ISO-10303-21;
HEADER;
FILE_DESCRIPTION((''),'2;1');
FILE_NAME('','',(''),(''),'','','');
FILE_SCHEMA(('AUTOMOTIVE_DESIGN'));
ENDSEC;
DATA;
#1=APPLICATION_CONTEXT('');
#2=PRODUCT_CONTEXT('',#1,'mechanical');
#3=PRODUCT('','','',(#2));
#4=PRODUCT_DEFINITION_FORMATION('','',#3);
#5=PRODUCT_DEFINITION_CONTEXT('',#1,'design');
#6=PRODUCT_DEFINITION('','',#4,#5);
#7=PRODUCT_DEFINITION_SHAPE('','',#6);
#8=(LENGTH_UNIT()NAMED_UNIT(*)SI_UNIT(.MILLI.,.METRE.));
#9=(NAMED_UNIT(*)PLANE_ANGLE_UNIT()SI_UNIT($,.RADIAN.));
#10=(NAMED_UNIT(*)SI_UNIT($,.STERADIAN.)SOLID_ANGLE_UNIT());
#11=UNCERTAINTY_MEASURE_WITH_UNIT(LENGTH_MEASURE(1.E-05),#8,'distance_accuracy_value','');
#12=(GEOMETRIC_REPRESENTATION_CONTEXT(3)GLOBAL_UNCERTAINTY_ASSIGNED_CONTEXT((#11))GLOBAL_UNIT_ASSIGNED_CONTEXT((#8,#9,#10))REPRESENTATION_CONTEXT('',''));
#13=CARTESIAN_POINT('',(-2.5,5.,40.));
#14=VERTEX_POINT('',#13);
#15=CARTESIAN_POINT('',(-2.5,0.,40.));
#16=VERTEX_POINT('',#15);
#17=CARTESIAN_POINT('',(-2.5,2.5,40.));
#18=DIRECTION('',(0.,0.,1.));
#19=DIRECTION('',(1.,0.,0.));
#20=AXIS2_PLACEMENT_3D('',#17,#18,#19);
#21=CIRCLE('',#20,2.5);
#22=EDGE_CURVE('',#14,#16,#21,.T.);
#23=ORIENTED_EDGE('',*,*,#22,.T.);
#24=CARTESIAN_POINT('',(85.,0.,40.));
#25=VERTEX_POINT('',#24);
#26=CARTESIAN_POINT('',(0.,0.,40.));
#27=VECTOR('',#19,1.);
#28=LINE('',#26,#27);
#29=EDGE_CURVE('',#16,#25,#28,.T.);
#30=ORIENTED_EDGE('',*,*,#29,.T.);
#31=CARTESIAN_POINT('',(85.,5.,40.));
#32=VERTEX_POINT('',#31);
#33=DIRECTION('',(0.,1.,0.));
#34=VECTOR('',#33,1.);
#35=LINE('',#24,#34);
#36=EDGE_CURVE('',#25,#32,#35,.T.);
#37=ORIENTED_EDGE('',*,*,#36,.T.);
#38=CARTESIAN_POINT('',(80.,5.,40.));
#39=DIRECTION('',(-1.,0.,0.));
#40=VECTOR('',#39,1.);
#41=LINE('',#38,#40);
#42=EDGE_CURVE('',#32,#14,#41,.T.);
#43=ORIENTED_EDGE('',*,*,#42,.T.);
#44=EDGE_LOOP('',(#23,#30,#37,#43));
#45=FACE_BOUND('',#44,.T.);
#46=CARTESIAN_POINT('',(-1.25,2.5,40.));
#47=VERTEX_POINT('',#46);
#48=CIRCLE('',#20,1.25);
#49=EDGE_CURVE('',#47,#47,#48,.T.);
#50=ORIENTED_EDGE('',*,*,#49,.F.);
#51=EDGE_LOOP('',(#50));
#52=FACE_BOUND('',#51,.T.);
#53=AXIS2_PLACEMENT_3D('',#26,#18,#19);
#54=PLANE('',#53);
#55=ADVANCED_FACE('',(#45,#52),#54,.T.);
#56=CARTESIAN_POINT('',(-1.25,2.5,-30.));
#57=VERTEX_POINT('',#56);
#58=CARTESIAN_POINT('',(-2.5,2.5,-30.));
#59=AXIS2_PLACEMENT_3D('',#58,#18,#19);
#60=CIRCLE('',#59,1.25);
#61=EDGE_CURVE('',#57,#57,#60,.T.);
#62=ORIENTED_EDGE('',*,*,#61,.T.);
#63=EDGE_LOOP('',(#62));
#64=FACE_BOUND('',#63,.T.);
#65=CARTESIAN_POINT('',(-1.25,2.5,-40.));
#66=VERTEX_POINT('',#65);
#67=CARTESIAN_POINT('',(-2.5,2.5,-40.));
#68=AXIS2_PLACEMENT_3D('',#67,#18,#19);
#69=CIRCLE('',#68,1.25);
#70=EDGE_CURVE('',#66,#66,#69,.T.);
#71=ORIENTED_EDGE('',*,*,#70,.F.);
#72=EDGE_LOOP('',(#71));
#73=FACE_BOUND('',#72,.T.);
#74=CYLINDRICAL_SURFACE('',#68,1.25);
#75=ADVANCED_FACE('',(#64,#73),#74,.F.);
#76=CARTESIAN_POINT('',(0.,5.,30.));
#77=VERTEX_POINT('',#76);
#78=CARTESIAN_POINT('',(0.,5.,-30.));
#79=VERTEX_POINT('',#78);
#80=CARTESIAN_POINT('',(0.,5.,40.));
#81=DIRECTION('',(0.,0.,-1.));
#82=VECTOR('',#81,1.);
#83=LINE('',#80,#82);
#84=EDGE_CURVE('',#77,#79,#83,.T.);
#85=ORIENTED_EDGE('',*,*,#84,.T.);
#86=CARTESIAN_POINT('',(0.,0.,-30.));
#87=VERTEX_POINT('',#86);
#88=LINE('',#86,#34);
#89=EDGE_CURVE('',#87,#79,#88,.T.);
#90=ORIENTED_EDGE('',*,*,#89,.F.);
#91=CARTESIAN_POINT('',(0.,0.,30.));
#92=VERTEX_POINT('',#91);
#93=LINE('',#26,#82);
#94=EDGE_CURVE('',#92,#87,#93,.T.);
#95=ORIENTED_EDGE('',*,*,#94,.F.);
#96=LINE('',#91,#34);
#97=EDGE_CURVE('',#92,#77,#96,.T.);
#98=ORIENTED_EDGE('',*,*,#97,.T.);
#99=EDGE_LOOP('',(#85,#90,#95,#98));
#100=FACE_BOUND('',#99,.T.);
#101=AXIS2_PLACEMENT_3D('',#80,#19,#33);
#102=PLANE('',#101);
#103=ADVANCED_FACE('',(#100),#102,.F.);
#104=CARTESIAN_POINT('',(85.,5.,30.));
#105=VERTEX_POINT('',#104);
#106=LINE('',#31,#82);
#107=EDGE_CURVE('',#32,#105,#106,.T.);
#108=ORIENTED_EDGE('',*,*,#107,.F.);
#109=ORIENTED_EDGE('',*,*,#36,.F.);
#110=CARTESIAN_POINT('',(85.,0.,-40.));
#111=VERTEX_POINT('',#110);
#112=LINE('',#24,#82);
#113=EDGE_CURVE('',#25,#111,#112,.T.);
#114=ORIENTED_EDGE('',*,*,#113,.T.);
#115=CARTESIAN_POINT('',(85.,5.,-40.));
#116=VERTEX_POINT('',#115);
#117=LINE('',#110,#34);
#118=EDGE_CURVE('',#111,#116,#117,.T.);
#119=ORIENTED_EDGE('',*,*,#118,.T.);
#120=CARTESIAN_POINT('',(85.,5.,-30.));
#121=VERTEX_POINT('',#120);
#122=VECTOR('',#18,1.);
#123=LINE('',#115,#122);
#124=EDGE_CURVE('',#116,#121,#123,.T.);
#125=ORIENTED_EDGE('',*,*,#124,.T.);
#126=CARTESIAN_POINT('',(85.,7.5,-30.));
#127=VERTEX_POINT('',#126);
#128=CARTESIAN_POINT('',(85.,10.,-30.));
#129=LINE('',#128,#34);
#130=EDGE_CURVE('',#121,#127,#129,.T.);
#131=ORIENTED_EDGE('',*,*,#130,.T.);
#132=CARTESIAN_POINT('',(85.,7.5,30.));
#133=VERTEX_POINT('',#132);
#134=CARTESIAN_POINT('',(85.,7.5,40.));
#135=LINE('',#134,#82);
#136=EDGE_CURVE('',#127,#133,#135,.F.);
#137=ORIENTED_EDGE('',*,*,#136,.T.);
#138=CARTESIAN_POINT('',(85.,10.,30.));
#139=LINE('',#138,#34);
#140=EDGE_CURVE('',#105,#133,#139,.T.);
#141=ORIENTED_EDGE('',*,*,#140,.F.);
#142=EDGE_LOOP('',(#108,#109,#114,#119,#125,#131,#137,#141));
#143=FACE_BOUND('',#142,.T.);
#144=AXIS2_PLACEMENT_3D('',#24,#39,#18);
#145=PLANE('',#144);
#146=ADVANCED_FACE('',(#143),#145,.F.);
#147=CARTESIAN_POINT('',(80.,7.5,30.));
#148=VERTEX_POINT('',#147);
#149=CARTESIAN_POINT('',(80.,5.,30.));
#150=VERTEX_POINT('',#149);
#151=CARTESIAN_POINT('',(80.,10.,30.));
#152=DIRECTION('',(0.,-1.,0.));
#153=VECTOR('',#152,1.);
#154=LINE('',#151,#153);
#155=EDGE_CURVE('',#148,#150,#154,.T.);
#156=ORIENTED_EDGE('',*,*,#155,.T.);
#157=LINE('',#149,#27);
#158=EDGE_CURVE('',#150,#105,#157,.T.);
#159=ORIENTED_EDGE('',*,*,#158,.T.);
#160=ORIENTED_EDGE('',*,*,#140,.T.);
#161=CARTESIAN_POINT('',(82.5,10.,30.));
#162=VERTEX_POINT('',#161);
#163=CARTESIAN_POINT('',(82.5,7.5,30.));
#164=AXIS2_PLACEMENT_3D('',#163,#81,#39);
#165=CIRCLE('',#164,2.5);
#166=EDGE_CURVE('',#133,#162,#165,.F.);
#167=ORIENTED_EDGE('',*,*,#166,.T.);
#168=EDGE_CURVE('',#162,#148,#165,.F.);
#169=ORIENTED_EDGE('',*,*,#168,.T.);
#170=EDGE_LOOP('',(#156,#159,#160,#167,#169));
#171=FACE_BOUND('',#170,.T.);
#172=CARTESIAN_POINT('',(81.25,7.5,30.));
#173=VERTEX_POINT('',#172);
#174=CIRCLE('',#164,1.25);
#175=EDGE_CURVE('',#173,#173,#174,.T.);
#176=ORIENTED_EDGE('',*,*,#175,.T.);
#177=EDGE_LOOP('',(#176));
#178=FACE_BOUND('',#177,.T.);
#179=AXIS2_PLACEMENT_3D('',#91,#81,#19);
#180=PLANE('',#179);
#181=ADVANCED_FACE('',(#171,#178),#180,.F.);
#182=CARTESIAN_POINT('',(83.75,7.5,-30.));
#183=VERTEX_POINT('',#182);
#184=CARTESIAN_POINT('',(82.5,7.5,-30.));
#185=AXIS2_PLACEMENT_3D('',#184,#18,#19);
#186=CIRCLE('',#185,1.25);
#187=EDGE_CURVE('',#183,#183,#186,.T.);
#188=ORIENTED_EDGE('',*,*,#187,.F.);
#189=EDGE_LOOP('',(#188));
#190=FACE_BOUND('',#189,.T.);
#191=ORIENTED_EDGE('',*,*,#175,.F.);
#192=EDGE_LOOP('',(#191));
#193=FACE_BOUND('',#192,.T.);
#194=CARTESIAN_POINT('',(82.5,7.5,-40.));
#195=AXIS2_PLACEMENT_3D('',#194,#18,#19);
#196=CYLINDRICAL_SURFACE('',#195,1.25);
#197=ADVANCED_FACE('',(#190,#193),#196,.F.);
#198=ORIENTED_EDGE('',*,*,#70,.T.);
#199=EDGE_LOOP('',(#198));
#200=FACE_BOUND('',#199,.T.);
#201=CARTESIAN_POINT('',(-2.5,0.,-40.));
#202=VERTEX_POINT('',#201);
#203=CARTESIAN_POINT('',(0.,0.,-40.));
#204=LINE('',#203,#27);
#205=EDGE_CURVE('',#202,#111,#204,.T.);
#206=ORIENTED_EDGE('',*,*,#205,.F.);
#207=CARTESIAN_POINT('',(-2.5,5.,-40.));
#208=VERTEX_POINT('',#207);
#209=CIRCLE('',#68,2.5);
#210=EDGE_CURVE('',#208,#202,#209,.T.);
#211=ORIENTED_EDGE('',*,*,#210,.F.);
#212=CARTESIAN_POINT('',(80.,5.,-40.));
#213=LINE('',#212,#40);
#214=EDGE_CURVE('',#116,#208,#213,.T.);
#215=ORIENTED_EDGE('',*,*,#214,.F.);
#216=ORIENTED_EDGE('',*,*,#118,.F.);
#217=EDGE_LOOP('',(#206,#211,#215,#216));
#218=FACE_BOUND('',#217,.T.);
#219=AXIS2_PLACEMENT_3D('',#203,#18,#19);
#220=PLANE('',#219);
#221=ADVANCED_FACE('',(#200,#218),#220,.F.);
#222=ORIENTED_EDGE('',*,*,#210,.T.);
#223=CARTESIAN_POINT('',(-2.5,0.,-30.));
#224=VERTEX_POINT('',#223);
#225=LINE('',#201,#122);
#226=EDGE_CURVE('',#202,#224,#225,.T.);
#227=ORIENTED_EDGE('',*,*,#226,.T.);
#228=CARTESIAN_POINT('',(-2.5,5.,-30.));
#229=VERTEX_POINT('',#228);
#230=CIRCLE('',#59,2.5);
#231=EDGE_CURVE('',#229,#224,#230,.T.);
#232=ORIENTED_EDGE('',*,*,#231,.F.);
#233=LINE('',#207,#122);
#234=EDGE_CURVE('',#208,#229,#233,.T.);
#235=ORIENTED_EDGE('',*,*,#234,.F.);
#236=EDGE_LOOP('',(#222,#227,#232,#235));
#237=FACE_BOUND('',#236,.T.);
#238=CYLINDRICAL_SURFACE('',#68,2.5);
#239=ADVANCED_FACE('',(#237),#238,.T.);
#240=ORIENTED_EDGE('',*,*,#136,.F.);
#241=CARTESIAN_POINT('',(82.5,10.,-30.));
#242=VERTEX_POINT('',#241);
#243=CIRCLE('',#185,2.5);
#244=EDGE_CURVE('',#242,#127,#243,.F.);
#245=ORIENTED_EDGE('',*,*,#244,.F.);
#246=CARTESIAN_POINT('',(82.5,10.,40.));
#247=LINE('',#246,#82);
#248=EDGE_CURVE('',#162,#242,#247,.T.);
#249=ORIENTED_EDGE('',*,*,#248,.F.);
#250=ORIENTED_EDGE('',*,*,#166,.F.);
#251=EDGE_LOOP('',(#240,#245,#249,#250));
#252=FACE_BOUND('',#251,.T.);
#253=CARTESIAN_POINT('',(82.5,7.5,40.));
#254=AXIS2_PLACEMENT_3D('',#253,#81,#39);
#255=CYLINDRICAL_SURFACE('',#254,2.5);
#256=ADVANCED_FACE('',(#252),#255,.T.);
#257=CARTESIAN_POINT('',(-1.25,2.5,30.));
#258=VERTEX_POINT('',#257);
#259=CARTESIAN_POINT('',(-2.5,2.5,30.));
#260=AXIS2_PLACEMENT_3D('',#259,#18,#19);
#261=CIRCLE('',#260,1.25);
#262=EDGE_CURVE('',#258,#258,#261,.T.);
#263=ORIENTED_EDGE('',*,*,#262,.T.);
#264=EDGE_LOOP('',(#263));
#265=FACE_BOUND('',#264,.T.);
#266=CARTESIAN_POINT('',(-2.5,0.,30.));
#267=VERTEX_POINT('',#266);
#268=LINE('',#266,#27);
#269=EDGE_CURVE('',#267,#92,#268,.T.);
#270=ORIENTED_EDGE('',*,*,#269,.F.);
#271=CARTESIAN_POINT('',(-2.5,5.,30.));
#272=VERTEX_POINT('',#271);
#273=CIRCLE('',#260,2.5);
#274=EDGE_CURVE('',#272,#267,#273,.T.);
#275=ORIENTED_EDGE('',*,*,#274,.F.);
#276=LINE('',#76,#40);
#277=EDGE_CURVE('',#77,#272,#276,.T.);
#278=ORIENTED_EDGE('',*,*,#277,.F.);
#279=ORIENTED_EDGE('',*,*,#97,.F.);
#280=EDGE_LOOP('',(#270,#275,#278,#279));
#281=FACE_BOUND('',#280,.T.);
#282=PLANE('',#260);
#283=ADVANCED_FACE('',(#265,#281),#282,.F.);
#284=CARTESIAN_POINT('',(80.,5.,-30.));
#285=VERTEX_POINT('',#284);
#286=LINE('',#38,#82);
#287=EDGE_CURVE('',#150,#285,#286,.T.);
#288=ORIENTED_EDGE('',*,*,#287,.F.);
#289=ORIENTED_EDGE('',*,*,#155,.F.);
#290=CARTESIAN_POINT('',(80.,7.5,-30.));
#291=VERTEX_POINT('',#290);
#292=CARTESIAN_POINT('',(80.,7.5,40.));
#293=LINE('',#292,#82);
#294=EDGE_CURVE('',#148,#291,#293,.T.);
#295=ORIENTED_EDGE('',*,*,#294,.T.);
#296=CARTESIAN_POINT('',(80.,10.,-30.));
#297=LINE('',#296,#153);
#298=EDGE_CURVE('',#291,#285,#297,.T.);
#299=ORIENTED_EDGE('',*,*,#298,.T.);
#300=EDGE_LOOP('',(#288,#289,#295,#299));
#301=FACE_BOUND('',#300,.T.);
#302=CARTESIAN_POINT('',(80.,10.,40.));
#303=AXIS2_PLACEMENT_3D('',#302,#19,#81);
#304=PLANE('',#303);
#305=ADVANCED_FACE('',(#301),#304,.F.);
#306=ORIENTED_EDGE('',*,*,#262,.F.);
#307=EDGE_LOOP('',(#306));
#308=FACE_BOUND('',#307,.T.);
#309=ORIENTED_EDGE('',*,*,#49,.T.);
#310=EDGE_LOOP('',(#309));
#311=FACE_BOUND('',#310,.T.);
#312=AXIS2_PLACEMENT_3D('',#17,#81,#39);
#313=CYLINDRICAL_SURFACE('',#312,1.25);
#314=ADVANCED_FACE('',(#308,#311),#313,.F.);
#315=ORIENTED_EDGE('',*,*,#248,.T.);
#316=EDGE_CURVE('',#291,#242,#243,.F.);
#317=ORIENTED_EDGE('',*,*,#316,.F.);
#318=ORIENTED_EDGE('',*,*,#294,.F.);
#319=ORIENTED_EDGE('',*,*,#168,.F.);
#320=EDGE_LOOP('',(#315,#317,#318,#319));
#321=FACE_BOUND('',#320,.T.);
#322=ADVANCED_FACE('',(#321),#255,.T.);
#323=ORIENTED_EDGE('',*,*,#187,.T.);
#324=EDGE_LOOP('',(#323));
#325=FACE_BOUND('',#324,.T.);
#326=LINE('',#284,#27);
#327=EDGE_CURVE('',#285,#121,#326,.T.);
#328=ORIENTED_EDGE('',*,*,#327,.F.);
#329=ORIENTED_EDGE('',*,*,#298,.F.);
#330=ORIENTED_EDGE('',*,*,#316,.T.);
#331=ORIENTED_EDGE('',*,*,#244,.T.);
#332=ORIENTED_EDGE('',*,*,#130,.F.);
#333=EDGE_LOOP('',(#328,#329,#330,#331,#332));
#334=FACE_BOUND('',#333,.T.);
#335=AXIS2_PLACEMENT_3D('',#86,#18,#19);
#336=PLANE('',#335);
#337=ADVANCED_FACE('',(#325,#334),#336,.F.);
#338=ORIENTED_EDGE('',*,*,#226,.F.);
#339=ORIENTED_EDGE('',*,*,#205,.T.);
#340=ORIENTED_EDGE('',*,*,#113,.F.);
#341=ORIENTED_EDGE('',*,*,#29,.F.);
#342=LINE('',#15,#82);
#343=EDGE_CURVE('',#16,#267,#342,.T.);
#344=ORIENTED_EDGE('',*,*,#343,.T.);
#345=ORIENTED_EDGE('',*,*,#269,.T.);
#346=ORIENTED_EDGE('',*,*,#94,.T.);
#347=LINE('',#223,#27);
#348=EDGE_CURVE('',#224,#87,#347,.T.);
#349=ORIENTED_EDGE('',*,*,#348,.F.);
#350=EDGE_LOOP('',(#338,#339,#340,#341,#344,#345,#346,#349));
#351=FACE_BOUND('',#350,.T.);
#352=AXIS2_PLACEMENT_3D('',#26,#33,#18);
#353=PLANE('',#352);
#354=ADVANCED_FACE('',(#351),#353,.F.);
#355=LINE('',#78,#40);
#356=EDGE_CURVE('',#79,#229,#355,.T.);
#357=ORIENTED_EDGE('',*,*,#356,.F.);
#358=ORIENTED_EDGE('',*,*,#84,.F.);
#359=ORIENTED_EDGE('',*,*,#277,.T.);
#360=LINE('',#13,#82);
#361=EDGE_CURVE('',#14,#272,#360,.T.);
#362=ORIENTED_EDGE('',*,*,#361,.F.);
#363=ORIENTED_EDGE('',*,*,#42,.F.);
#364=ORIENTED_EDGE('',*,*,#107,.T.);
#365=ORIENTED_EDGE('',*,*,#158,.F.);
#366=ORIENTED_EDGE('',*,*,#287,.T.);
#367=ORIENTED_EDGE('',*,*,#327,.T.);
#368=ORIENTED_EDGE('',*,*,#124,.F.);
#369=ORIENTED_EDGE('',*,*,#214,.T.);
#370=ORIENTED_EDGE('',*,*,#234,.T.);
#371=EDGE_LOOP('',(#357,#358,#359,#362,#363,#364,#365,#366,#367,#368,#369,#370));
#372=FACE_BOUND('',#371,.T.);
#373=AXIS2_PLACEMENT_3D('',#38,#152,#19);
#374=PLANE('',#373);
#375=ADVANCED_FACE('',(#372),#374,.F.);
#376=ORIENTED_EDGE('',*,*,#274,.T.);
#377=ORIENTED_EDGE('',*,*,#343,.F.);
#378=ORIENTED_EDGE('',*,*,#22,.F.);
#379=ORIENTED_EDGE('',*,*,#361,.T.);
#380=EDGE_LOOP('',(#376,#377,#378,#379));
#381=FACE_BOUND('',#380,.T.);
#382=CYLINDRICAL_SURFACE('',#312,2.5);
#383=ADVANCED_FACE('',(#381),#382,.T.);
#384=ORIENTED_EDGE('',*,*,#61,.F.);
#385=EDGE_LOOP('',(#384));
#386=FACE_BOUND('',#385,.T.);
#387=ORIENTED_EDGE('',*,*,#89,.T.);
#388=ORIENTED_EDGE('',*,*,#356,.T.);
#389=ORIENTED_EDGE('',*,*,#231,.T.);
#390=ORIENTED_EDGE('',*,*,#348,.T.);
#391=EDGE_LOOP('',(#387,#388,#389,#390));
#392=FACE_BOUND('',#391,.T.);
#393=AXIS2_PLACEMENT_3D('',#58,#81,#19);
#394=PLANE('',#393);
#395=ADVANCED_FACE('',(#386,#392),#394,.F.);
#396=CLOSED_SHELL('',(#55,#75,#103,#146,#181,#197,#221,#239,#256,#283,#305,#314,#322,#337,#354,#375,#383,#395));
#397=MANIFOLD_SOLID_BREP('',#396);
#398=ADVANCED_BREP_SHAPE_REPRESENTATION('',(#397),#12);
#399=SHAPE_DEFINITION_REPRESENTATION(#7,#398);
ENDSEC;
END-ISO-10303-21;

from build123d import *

# Parameters (mm, degrees)
BOSS_EXTRUDE1_DEPTH     = 40
BOSS_EXTRUDE2_START     = 30
SKETCH2_R               = 1.25
BOSS_EXTRUDE2_DEPTH     = 10
CUT_EXTRUDE1_START      = -30
SKETCH3_W               = 5
SKETCH3_H               = 5
CUT_EXTRUDE1_DEPTH      = 10
CUT_EXTRUDE2_DEPTH      = 95.472218138
CUT_EXTRUDE2_DEPTH_BACK = 95.472218138
SKETCH4_R               = 1.25
FILLET1_R               = 2.5


with BuildPart() as part:
    # Sketch1 → Boss-Extrude1 (new, symmetric)
    with BuildSketch(Plane.XY):
        Polygon((0, 0), (85, 0), (85, 10), (80, 10), (80, 5), (0, 5), align=None)
    extrude(amount=BOSS_EXTRUDE1_DEPTH, both=True)

    # Sketch2 → Boss-Extrude2 (add)
    with BuildSketch(Plane.XY.offset(BOSS_EXTRUDE2_START)):
        with BuildLine():
            Line((0, 5), (-2.5, 5))
            ThreePointArc((-2.5, 5), (-5, 2.5), (-2.5, 0))
            Line((-2.5, 0), (0, 0))
            Line((0, 0), (0, 5))
        make_face()
        with Locations((-2.5, 2.5)):
            Circle(SKETCH2_R, mode=Mode.SUBTRACT)
    boss_extrude2 = extrude(amount=BOSS_EXTRUDE2_DEPTH)

    # Mirror2: Boss-Extrude2 across plane
    add(boss_extrude2.mirror(Plane.XY))

    # Sketch3 → Cut-Extrude1 (cut)
    with BuildSketch(Plane.XY.offset(CUT_EXTRUDE1_START)):
        with Locations((82.5, 7.5)):
            Rectangle(SKETCH3_W, SKETCH3_H)
    cut_extrude1 = extrude(amount=-CUT_EXTRUDE1_DEPTH, mode=Mode.SUBTRACT)

    # Mirror3: Cut-Extrude1 across plane
    add(cut_extrude1.mirror(Plane.XY), mode=Mode.SUBTRACT)

    # Sketch4 → Cut-Extrude2 (cut, two sides: drawn at the far end of the back side and taken through both)
    with BuildSketch(Plane.XY.offset(-CUT_EXTRUDE2_DEPTH_BACK)):
        with Locations((82.5, 7.5)):
            Circle(SKETCH4_R)
    extrude(amount=CUT_EXTRUDE2_DEPTH + CUT_EXTRUDE2_DEPTH_BACK, mode=Mode.SUBTRACT)

    # Fillet1
    fillet1_edges = [part.edges().sort_by_distance(p)[0] for p in [
        (80, 10, 0),
        (85, 10, 0),
    ]]
    fillet(fillet1_edges, radius=FILLET1_R - 0.0001)  # a hair under: the kernel refuses the full size


solid = part.part
